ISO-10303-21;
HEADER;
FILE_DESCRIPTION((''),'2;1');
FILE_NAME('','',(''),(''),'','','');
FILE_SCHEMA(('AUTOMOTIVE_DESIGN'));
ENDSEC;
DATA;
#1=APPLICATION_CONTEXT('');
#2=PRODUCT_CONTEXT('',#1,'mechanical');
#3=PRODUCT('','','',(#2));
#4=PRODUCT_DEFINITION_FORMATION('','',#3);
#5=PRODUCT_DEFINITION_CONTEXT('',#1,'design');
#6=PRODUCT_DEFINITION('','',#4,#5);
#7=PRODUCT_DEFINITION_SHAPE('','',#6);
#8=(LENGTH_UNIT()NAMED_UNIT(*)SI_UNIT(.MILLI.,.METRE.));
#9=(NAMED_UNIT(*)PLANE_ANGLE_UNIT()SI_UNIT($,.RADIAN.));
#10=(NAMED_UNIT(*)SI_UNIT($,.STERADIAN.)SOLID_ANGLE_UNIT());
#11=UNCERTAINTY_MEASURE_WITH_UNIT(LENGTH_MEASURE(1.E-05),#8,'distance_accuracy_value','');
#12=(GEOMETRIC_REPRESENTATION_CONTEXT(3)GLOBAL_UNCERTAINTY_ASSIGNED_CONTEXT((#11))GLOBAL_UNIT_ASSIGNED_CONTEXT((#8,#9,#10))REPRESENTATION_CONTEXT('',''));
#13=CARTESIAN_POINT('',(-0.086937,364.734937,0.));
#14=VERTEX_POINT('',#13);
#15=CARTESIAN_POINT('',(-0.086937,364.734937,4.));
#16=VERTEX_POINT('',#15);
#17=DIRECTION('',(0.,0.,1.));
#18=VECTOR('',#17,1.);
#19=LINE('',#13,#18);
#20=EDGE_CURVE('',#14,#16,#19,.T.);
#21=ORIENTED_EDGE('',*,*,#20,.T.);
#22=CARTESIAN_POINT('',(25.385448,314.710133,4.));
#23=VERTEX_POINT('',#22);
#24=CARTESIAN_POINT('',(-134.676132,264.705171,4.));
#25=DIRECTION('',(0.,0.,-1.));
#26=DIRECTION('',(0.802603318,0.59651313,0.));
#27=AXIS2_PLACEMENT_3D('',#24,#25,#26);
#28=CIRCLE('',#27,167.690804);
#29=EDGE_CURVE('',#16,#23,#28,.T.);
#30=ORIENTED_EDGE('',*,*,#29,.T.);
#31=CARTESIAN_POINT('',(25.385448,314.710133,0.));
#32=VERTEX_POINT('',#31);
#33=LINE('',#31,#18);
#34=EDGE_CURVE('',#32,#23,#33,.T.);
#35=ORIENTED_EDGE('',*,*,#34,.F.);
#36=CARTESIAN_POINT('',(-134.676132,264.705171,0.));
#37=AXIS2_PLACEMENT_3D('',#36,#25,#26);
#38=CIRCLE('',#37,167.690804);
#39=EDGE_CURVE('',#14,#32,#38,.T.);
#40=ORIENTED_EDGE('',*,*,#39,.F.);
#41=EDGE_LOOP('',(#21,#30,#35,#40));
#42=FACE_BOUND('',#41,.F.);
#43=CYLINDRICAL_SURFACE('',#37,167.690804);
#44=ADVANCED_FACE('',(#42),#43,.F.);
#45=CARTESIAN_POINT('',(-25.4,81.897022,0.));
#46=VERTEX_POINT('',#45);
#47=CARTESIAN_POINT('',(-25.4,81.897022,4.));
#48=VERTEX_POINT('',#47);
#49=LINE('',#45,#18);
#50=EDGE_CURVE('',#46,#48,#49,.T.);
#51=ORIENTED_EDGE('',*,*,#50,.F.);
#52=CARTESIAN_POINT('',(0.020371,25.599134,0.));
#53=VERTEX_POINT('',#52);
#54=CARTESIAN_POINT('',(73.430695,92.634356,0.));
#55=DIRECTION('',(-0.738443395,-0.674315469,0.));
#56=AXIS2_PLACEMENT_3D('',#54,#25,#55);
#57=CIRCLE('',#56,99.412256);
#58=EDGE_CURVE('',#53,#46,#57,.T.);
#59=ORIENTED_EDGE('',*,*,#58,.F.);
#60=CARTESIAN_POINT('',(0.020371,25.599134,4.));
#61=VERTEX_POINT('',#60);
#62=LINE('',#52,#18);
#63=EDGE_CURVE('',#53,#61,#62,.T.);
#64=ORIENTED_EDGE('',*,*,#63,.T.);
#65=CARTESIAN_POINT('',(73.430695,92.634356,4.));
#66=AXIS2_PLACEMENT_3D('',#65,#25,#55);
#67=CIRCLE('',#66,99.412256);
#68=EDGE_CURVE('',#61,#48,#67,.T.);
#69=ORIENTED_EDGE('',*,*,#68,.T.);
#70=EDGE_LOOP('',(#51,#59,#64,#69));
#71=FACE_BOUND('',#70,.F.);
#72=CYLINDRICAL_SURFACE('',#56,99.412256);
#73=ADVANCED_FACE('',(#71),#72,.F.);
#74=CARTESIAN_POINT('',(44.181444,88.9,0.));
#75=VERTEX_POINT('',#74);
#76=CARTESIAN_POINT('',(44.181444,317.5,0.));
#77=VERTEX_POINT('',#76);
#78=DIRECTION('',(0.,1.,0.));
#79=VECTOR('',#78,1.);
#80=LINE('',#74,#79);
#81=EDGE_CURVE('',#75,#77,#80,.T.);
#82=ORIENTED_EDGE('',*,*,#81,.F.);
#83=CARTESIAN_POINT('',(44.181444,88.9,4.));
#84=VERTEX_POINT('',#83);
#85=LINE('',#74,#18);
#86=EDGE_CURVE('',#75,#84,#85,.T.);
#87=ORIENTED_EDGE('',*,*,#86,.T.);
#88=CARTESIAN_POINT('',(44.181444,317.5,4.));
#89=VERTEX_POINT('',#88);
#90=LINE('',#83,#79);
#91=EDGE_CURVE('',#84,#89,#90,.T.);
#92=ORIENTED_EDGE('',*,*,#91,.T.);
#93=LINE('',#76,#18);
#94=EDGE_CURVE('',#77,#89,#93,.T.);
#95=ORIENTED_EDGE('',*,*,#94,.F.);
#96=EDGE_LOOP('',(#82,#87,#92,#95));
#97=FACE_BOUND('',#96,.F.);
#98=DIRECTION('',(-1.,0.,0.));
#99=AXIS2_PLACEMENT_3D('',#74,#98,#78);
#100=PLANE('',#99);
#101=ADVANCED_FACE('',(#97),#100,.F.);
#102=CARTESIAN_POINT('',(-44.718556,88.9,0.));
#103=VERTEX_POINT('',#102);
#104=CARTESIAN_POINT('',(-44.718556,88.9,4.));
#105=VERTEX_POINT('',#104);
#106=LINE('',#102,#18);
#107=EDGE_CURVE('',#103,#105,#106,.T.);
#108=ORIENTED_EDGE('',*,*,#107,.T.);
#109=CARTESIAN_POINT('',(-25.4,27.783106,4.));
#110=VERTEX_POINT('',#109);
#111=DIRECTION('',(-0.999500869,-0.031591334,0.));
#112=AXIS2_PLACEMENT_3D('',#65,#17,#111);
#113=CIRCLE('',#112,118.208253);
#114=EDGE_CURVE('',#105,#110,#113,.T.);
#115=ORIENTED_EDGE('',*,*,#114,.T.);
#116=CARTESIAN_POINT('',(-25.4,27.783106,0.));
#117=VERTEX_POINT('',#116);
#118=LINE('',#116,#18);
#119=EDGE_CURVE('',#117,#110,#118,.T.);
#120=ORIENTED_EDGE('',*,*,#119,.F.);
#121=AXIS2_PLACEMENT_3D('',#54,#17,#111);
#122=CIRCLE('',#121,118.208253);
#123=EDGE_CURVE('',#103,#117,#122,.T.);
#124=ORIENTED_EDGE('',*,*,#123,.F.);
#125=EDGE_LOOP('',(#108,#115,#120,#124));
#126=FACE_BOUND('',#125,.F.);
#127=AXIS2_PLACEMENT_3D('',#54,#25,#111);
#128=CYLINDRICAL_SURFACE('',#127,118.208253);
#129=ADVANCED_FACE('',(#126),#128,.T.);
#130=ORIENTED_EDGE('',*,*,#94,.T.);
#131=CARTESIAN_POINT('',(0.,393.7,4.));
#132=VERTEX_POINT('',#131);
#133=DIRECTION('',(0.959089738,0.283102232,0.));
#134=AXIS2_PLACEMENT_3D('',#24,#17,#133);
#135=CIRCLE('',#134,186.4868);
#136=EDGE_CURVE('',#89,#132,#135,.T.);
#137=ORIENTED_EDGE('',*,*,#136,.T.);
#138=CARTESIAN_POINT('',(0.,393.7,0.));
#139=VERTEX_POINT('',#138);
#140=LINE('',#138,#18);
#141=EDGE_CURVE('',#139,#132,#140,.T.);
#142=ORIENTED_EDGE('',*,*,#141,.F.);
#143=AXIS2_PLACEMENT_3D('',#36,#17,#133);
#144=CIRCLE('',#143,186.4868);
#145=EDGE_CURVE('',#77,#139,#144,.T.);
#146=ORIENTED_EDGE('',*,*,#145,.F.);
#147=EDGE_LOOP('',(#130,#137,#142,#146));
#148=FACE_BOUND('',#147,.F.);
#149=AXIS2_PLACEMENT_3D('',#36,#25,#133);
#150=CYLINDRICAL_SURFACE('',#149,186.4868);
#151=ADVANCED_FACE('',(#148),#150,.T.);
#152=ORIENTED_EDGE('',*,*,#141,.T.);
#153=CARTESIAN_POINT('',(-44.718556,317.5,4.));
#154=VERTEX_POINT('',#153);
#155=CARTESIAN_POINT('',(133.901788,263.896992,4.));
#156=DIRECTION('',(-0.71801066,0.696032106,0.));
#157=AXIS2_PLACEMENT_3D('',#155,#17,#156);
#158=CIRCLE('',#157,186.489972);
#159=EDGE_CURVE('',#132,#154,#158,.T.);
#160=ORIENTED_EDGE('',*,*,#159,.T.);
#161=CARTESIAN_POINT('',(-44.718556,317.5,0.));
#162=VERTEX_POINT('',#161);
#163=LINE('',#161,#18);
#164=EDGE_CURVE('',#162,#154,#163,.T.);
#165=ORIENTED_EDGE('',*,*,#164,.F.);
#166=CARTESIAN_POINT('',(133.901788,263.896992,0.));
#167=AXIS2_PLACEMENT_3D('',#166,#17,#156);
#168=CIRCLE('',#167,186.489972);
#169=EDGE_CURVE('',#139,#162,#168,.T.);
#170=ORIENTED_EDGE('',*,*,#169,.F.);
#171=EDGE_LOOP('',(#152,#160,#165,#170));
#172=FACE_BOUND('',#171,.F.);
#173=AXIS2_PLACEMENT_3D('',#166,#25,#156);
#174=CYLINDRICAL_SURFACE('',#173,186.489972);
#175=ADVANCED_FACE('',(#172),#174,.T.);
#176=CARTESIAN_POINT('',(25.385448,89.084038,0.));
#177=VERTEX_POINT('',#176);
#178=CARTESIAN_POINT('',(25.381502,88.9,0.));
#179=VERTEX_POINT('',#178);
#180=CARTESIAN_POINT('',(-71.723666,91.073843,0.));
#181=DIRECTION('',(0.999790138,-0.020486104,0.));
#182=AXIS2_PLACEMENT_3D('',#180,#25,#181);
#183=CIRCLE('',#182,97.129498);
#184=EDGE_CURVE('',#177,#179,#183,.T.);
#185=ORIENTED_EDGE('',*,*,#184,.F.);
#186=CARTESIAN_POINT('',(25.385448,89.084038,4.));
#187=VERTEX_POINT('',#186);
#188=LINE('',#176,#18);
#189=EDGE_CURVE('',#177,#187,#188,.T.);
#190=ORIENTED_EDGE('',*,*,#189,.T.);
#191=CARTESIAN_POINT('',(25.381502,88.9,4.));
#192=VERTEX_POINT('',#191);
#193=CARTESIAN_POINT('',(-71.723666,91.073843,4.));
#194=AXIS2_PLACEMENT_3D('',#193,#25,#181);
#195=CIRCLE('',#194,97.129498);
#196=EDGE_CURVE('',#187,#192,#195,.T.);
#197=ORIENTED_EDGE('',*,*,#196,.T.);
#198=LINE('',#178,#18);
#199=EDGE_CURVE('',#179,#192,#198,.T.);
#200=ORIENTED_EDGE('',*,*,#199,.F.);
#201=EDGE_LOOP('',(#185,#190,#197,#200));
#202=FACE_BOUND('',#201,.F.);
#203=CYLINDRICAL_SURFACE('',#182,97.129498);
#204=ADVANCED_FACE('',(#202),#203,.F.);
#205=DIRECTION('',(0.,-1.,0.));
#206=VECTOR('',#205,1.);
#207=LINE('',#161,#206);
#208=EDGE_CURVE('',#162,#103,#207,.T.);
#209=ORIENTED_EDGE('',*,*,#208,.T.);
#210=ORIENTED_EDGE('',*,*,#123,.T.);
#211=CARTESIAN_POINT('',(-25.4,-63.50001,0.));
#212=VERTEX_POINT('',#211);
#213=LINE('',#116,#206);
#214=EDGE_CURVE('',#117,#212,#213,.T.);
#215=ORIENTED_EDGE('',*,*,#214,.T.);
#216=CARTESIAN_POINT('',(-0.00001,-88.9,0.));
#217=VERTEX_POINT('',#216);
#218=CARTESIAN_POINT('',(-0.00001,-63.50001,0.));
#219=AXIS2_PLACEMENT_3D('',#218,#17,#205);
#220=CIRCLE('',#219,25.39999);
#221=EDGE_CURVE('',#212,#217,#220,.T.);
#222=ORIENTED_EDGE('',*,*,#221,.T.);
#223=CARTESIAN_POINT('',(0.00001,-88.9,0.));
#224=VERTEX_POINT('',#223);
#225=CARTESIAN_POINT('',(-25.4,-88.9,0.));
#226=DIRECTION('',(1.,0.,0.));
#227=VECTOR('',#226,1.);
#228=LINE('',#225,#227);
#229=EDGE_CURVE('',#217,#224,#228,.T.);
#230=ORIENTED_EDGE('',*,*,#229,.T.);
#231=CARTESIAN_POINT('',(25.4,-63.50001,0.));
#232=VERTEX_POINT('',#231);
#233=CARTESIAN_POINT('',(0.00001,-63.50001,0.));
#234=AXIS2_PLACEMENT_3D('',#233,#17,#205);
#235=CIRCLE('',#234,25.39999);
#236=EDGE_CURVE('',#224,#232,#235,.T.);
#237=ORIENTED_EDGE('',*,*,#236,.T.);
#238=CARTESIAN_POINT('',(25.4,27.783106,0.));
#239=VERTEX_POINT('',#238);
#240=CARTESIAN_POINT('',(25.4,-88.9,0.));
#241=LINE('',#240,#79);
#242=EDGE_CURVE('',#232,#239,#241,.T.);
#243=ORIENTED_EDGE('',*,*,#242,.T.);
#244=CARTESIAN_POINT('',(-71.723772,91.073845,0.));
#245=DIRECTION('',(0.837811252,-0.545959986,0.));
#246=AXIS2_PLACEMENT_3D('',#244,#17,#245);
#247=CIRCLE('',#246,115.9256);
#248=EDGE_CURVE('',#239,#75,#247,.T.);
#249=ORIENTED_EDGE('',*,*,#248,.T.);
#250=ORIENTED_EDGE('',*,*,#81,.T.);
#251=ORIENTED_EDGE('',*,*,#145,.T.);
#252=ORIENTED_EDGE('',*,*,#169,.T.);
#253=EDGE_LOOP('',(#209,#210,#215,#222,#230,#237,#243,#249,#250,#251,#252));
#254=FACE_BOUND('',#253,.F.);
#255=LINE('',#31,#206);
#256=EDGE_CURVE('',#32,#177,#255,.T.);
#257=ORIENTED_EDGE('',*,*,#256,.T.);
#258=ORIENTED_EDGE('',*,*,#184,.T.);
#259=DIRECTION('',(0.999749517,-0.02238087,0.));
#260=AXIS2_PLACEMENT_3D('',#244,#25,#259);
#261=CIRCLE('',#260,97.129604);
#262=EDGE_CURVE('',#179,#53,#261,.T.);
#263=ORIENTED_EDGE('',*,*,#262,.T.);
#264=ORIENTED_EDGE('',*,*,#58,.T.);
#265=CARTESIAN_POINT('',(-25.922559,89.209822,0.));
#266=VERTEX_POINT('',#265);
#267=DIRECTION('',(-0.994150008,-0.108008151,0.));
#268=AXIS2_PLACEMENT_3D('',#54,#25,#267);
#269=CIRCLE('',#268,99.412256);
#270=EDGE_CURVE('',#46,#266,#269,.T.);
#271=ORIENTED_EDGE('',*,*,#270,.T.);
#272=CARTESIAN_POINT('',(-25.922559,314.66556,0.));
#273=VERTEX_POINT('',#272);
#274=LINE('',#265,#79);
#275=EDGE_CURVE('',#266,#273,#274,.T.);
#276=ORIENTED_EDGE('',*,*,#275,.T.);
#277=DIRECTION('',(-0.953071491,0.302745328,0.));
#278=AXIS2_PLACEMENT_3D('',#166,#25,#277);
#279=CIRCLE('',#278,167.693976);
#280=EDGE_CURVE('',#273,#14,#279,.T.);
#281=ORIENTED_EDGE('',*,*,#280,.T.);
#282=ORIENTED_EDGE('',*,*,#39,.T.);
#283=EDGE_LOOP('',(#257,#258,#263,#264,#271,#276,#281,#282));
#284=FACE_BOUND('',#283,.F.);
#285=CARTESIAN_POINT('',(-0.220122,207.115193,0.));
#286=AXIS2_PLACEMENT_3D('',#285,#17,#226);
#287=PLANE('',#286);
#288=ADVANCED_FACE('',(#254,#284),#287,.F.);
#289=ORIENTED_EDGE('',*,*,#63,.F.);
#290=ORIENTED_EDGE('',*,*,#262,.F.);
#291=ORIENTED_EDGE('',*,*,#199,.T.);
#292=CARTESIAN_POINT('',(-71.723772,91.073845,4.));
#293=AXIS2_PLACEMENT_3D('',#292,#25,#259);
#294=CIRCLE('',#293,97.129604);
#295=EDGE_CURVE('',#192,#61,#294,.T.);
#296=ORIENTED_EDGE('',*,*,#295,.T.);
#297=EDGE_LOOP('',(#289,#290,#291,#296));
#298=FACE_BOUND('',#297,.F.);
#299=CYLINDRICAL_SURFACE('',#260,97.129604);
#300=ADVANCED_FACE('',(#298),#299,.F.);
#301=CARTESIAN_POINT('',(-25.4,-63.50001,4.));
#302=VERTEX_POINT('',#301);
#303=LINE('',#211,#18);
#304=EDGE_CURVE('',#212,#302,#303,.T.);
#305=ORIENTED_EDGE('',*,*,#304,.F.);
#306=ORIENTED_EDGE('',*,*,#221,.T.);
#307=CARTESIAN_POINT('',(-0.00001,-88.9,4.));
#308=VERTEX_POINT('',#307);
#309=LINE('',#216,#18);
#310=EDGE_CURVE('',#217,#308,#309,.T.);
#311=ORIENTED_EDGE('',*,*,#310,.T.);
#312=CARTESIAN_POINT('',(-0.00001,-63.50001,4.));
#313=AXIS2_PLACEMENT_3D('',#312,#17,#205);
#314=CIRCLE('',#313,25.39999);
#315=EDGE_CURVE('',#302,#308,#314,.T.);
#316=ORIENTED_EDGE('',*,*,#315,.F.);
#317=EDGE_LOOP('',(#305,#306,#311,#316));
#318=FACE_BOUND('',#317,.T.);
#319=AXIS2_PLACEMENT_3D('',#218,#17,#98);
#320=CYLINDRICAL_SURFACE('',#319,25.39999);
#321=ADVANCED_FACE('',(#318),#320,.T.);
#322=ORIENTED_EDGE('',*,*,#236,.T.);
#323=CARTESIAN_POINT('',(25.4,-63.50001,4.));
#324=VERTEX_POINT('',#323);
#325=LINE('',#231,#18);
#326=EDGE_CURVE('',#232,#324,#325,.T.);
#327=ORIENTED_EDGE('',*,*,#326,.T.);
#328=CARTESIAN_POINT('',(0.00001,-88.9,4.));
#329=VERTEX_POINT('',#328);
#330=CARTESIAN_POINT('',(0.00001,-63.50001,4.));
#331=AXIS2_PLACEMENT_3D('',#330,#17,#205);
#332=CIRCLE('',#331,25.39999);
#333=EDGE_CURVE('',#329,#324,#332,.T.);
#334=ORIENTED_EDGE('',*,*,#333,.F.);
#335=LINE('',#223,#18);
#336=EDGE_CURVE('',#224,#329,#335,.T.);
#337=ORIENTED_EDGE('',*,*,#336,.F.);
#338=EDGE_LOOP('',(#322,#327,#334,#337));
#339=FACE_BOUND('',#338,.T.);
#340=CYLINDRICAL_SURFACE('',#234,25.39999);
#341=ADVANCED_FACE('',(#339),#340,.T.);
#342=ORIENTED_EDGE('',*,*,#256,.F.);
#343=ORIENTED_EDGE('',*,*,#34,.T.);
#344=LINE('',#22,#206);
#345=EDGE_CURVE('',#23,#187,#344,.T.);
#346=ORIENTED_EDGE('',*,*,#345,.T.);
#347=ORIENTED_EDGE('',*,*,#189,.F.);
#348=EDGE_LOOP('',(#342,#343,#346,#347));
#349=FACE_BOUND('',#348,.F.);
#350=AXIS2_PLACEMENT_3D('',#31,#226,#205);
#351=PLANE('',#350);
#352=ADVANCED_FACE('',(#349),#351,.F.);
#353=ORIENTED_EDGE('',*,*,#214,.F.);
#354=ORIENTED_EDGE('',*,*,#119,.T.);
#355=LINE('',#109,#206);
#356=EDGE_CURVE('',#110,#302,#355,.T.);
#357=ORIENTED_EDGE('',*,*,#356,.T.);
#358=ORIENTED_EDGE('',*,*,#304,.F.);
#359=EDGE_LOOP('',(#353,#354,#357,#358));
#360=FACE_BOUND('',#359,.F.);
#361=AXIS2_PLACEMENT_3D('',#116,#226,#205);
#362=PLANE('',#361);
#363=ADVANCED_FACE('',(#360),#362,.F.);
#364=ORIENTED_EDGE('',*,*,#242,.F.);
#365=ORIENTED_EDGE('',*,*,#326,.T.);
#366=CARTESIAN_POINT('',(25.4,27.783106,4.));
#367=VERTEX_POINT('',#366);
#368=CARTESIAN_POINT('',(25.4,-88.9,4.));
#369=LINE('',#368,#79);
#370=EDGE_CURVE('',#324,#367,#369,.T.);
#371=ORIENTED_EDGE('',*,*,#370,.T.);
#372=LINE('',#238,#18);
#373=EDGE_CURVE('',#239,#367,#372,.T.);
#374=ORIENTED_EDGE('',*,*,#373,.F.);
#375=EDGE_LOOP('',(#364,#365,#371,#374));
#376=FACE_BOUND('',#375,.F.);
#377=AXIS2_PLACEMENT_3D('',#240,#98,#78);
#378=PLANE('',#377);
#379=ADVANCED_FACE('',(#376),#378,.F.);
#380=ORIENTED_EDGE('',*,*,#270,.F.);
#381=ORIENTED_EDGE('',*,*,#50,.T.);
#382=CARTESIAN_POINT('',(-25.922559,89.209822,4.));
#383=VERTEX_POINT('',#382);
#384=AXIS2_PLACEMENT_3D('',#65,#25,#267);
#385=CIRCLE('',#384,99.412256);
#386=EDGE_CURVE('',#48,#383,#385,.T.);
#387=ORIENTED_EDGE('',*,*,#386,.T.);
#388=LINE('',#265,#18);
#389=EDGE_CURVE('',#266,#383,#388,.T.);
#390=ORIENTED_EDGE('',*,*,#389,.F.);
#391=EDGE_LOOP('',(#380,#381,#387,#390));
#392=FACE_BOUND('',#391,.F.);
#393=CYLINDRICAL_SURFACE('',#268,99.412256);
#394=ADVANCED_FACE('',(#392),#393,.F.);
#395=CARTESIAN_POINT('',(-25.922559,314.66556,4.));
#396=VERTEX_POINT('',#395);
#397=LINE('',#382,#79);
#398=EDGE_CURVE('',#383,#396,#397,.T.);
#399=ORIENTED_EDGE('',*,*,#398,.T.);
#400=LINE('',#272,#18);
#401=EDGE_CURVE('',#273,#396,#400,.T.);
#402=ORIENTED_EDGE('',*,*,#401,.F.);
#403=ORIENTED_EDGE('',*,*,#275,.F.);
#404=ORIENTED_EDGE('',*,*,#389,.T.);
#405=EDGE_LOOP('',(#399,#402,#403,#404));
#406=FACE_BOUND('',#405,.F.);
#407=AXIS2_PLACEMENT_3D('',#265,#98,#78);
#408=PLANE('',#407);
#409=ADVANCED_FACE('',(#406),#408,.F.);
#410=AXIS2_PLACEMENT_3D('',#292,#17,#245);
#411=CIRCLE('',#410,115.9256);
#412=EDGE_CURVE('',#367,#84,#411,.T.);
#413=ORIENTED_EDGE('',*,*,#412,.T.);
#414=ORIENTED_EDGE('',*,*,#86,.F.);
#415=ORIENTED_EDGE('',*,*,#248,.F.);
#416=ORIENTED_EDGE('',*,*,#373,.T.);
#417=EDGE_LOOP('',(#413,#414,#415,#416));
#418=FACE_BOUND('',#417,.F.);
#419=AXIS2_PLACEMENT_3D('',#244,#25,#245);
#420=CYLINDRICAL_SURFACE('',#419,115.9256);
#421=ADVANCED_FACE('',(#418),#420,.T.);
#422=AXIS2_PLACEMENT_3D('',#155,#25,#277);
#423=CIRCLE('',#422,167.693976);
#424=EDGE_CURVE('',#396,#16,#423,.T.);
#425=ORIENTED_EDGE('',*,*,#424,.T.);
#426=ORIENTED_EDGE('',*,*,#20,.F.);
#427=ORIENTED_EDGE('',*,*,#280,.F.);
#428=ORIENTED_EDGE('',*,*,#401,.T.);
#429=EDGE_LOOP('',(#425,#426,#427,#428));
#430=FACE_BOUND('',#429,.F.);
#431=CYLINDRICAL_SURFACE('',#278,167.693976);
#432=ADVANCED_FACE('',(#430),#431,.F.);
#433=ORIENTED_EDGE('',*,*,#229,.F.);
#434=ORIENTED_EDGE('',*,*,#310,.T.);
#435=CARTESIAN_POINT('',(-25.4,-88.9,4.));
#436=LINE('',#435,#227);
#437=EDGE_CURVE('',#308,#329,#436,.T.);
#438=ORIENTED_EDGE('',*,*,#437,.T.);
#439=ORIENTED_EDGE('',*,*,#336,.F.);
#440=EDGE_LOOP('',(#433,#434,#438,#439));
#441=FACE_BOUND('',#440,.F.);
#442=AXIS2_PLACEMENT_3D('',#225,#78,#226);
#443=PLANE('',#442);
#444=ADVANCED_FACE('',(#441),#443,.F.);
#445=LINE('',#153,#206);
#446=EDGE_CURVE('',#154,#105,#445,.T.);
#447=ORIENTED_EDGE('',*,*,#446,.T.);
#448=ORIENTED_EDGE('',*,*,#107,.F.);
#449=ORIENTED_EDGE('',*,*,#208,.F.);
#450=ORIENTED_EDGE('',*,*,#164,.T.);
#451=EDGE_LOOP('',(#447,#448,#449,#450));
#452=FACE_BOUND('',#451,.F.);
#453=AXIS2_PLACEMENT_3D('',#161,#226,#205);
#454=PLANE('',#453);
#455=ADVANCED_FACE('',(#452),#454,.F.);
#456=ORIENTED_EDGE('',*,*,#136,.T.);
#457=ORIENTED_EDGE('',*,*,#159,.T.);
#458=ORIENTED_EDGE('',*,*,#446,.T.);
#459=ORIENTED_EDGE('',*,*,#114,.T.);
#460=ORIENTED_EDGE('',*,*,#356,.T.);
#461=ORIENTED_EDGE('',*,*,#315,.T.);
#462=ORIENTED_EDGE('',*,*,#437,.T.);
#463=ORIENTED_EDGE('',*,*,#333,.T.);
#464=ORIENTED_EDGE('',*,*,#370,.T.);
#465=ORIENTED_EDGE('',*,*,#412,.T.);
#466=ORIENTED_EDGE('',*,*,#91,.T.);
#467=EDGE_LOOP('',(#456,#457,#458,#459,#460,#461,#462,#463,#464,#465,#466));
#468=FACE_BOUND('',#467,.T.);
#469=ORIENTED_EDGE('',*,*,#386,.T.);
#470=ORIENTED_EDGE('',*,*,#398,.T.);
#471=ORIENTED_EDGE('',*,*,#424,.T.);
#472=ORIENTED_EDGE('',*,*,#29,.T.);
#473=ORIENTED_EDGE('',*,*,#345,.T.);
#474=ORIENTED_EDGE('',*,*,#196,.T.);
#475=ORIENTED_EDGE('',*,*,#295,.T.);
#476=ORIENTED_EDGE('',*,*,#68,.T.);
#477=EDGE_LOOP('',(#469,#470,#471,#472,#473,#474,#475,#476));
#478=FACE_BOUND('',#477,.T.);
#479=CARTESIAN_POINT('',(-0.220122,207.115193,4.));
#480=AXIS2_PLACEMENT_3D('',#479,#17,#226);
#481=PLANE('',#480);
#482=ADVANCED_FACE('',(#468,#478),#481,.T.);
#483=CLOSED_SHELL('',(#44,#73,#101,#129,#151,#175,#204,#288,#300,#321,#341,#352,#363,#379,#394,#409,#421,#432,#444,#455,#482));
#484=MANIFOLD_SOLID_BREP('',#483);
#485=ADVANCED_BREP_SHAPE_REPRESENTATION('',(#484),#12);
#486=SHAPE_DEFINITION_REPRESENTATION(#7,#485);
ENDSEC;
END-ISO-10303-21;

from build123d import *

# Parameters (mm, degrees)
F1_DEPTH = 4
F2_R     = 25.39999


# Not quite as in the source:
# - a fillet or chamfer is up to 0.001 mm smaller than in the source, because OpenCascade refuses the exact size


with BuildPart() as f1:
    # F0 (on Top) → F1 (new body)
    with BuildSketch(Plane.XY):
        with BuildLine():
            Line((25.4, 88.9), (25.4, 27.783106151))
            ThreePointArc((25.4, 27.783106151), (39.0875817391, 57.0211124393), (44.1814440725, 88.9))
            Line((44.1814440725, 88.9), (44.1814440725, 317.5))
            ThreePointArc((44.1814440725, 317.5), (26.6541395651, 358.2459104505), (0, 393.7))
            ThreePointArc((0, 393.7), (-26.9370466698, 358.2864987651), (-44.7185559275, 317.5))
            Line((-44.7185559275, 317.5), (-44.7185559275, 88.9))
            ThreePointArc((-44.7185559275, 88.9), (-39.2808523641, 57.0071475451), (-25.4, 27.783106151))
            Line((-25.4, 27.783106151), (-25.4, 81.8970223493))
            ThreePointArc((-25.4, 81.8970223493), (-25.7287156311, 85.5486031353), (-25.9225594861, 89.209821616))
            Line((-25.9225594861, 89.209821616), (-25.9225594861, 314.6655596019))
            ThreePointArc((-25.9225594861, 314.6655596019), (-15.1225925717, 340.7930484479), (-0.0869368678, 364.7349367673))
            ThreePointArc((-0.0869368678, 364.7349367673), (14.7574318658, 340.7960081036), (25.385447631, 314.7101331987))
            Line((25.385447631, 314.7101331987), (25.385447631, 89.0840377413))
            ThreePointArc((25.385447631, 89.0840377413), (25.3835184902, 88.992017936), (25.3815021522, 88.9))
            Line((25.3815021522, 88.9), (25.4, 88.9))
        make_face()
        with BuildLine():
            Line((-25.4, -88.9), (25.4, -88.9))
            Line((25.4, -88.9), (25.4, 27.783106151))
            ThreePointArc((25.4, 27.783106151), (13.8352633227, 12.8536673819), (0, 0))
            ThreePointArc((0, 0), (-13.8130547318, 12.8739710228), (-25.4, 27.783106151))
            Line((-25.4, 27.783106151), (-25.4, -88.9))
        make_face()
        with BuildLine():
            ThreePointArc((0, 0), (13.8352633227, 12.8536673819), (25.4, 27.783106151))
            Line((25.4, 27.783106151), (25.4, 88.9))
            Line((25.4, 88.9), (25.3815021522, 88.9))
            ThreePointArc((25.3815021522, 88.9), (18.4387554256, 54.950742752), (0.0203713554, 25.5991341412))
            ThreePointArc((0.0203713554, 25.5991341412), (-17.1734173627, 51.7235821598), (-25.4, 81.8970223493))
            Line((-25.4, 81.8970223493), (-25.4, 27.783106151))
            ThreePointArc((-25.4, 27.783106151), (-13.8130547318, 12.8739710228), (0, 0))
        make_face()
    extrude(amount=F1_DEPTH)

    # F2 (radius 25.4 in the source; OpenCascade refuses exactly that, so slightly less here)
    f2_edges = [f1.edges().sort_by_distance(p)[0] for p in [
        (-25.4, -88.9, 2),
        (25.4, -88.9, 2),
    ]]
    fillet(f2_edges, radius=F2_R)


solid = f1.part
